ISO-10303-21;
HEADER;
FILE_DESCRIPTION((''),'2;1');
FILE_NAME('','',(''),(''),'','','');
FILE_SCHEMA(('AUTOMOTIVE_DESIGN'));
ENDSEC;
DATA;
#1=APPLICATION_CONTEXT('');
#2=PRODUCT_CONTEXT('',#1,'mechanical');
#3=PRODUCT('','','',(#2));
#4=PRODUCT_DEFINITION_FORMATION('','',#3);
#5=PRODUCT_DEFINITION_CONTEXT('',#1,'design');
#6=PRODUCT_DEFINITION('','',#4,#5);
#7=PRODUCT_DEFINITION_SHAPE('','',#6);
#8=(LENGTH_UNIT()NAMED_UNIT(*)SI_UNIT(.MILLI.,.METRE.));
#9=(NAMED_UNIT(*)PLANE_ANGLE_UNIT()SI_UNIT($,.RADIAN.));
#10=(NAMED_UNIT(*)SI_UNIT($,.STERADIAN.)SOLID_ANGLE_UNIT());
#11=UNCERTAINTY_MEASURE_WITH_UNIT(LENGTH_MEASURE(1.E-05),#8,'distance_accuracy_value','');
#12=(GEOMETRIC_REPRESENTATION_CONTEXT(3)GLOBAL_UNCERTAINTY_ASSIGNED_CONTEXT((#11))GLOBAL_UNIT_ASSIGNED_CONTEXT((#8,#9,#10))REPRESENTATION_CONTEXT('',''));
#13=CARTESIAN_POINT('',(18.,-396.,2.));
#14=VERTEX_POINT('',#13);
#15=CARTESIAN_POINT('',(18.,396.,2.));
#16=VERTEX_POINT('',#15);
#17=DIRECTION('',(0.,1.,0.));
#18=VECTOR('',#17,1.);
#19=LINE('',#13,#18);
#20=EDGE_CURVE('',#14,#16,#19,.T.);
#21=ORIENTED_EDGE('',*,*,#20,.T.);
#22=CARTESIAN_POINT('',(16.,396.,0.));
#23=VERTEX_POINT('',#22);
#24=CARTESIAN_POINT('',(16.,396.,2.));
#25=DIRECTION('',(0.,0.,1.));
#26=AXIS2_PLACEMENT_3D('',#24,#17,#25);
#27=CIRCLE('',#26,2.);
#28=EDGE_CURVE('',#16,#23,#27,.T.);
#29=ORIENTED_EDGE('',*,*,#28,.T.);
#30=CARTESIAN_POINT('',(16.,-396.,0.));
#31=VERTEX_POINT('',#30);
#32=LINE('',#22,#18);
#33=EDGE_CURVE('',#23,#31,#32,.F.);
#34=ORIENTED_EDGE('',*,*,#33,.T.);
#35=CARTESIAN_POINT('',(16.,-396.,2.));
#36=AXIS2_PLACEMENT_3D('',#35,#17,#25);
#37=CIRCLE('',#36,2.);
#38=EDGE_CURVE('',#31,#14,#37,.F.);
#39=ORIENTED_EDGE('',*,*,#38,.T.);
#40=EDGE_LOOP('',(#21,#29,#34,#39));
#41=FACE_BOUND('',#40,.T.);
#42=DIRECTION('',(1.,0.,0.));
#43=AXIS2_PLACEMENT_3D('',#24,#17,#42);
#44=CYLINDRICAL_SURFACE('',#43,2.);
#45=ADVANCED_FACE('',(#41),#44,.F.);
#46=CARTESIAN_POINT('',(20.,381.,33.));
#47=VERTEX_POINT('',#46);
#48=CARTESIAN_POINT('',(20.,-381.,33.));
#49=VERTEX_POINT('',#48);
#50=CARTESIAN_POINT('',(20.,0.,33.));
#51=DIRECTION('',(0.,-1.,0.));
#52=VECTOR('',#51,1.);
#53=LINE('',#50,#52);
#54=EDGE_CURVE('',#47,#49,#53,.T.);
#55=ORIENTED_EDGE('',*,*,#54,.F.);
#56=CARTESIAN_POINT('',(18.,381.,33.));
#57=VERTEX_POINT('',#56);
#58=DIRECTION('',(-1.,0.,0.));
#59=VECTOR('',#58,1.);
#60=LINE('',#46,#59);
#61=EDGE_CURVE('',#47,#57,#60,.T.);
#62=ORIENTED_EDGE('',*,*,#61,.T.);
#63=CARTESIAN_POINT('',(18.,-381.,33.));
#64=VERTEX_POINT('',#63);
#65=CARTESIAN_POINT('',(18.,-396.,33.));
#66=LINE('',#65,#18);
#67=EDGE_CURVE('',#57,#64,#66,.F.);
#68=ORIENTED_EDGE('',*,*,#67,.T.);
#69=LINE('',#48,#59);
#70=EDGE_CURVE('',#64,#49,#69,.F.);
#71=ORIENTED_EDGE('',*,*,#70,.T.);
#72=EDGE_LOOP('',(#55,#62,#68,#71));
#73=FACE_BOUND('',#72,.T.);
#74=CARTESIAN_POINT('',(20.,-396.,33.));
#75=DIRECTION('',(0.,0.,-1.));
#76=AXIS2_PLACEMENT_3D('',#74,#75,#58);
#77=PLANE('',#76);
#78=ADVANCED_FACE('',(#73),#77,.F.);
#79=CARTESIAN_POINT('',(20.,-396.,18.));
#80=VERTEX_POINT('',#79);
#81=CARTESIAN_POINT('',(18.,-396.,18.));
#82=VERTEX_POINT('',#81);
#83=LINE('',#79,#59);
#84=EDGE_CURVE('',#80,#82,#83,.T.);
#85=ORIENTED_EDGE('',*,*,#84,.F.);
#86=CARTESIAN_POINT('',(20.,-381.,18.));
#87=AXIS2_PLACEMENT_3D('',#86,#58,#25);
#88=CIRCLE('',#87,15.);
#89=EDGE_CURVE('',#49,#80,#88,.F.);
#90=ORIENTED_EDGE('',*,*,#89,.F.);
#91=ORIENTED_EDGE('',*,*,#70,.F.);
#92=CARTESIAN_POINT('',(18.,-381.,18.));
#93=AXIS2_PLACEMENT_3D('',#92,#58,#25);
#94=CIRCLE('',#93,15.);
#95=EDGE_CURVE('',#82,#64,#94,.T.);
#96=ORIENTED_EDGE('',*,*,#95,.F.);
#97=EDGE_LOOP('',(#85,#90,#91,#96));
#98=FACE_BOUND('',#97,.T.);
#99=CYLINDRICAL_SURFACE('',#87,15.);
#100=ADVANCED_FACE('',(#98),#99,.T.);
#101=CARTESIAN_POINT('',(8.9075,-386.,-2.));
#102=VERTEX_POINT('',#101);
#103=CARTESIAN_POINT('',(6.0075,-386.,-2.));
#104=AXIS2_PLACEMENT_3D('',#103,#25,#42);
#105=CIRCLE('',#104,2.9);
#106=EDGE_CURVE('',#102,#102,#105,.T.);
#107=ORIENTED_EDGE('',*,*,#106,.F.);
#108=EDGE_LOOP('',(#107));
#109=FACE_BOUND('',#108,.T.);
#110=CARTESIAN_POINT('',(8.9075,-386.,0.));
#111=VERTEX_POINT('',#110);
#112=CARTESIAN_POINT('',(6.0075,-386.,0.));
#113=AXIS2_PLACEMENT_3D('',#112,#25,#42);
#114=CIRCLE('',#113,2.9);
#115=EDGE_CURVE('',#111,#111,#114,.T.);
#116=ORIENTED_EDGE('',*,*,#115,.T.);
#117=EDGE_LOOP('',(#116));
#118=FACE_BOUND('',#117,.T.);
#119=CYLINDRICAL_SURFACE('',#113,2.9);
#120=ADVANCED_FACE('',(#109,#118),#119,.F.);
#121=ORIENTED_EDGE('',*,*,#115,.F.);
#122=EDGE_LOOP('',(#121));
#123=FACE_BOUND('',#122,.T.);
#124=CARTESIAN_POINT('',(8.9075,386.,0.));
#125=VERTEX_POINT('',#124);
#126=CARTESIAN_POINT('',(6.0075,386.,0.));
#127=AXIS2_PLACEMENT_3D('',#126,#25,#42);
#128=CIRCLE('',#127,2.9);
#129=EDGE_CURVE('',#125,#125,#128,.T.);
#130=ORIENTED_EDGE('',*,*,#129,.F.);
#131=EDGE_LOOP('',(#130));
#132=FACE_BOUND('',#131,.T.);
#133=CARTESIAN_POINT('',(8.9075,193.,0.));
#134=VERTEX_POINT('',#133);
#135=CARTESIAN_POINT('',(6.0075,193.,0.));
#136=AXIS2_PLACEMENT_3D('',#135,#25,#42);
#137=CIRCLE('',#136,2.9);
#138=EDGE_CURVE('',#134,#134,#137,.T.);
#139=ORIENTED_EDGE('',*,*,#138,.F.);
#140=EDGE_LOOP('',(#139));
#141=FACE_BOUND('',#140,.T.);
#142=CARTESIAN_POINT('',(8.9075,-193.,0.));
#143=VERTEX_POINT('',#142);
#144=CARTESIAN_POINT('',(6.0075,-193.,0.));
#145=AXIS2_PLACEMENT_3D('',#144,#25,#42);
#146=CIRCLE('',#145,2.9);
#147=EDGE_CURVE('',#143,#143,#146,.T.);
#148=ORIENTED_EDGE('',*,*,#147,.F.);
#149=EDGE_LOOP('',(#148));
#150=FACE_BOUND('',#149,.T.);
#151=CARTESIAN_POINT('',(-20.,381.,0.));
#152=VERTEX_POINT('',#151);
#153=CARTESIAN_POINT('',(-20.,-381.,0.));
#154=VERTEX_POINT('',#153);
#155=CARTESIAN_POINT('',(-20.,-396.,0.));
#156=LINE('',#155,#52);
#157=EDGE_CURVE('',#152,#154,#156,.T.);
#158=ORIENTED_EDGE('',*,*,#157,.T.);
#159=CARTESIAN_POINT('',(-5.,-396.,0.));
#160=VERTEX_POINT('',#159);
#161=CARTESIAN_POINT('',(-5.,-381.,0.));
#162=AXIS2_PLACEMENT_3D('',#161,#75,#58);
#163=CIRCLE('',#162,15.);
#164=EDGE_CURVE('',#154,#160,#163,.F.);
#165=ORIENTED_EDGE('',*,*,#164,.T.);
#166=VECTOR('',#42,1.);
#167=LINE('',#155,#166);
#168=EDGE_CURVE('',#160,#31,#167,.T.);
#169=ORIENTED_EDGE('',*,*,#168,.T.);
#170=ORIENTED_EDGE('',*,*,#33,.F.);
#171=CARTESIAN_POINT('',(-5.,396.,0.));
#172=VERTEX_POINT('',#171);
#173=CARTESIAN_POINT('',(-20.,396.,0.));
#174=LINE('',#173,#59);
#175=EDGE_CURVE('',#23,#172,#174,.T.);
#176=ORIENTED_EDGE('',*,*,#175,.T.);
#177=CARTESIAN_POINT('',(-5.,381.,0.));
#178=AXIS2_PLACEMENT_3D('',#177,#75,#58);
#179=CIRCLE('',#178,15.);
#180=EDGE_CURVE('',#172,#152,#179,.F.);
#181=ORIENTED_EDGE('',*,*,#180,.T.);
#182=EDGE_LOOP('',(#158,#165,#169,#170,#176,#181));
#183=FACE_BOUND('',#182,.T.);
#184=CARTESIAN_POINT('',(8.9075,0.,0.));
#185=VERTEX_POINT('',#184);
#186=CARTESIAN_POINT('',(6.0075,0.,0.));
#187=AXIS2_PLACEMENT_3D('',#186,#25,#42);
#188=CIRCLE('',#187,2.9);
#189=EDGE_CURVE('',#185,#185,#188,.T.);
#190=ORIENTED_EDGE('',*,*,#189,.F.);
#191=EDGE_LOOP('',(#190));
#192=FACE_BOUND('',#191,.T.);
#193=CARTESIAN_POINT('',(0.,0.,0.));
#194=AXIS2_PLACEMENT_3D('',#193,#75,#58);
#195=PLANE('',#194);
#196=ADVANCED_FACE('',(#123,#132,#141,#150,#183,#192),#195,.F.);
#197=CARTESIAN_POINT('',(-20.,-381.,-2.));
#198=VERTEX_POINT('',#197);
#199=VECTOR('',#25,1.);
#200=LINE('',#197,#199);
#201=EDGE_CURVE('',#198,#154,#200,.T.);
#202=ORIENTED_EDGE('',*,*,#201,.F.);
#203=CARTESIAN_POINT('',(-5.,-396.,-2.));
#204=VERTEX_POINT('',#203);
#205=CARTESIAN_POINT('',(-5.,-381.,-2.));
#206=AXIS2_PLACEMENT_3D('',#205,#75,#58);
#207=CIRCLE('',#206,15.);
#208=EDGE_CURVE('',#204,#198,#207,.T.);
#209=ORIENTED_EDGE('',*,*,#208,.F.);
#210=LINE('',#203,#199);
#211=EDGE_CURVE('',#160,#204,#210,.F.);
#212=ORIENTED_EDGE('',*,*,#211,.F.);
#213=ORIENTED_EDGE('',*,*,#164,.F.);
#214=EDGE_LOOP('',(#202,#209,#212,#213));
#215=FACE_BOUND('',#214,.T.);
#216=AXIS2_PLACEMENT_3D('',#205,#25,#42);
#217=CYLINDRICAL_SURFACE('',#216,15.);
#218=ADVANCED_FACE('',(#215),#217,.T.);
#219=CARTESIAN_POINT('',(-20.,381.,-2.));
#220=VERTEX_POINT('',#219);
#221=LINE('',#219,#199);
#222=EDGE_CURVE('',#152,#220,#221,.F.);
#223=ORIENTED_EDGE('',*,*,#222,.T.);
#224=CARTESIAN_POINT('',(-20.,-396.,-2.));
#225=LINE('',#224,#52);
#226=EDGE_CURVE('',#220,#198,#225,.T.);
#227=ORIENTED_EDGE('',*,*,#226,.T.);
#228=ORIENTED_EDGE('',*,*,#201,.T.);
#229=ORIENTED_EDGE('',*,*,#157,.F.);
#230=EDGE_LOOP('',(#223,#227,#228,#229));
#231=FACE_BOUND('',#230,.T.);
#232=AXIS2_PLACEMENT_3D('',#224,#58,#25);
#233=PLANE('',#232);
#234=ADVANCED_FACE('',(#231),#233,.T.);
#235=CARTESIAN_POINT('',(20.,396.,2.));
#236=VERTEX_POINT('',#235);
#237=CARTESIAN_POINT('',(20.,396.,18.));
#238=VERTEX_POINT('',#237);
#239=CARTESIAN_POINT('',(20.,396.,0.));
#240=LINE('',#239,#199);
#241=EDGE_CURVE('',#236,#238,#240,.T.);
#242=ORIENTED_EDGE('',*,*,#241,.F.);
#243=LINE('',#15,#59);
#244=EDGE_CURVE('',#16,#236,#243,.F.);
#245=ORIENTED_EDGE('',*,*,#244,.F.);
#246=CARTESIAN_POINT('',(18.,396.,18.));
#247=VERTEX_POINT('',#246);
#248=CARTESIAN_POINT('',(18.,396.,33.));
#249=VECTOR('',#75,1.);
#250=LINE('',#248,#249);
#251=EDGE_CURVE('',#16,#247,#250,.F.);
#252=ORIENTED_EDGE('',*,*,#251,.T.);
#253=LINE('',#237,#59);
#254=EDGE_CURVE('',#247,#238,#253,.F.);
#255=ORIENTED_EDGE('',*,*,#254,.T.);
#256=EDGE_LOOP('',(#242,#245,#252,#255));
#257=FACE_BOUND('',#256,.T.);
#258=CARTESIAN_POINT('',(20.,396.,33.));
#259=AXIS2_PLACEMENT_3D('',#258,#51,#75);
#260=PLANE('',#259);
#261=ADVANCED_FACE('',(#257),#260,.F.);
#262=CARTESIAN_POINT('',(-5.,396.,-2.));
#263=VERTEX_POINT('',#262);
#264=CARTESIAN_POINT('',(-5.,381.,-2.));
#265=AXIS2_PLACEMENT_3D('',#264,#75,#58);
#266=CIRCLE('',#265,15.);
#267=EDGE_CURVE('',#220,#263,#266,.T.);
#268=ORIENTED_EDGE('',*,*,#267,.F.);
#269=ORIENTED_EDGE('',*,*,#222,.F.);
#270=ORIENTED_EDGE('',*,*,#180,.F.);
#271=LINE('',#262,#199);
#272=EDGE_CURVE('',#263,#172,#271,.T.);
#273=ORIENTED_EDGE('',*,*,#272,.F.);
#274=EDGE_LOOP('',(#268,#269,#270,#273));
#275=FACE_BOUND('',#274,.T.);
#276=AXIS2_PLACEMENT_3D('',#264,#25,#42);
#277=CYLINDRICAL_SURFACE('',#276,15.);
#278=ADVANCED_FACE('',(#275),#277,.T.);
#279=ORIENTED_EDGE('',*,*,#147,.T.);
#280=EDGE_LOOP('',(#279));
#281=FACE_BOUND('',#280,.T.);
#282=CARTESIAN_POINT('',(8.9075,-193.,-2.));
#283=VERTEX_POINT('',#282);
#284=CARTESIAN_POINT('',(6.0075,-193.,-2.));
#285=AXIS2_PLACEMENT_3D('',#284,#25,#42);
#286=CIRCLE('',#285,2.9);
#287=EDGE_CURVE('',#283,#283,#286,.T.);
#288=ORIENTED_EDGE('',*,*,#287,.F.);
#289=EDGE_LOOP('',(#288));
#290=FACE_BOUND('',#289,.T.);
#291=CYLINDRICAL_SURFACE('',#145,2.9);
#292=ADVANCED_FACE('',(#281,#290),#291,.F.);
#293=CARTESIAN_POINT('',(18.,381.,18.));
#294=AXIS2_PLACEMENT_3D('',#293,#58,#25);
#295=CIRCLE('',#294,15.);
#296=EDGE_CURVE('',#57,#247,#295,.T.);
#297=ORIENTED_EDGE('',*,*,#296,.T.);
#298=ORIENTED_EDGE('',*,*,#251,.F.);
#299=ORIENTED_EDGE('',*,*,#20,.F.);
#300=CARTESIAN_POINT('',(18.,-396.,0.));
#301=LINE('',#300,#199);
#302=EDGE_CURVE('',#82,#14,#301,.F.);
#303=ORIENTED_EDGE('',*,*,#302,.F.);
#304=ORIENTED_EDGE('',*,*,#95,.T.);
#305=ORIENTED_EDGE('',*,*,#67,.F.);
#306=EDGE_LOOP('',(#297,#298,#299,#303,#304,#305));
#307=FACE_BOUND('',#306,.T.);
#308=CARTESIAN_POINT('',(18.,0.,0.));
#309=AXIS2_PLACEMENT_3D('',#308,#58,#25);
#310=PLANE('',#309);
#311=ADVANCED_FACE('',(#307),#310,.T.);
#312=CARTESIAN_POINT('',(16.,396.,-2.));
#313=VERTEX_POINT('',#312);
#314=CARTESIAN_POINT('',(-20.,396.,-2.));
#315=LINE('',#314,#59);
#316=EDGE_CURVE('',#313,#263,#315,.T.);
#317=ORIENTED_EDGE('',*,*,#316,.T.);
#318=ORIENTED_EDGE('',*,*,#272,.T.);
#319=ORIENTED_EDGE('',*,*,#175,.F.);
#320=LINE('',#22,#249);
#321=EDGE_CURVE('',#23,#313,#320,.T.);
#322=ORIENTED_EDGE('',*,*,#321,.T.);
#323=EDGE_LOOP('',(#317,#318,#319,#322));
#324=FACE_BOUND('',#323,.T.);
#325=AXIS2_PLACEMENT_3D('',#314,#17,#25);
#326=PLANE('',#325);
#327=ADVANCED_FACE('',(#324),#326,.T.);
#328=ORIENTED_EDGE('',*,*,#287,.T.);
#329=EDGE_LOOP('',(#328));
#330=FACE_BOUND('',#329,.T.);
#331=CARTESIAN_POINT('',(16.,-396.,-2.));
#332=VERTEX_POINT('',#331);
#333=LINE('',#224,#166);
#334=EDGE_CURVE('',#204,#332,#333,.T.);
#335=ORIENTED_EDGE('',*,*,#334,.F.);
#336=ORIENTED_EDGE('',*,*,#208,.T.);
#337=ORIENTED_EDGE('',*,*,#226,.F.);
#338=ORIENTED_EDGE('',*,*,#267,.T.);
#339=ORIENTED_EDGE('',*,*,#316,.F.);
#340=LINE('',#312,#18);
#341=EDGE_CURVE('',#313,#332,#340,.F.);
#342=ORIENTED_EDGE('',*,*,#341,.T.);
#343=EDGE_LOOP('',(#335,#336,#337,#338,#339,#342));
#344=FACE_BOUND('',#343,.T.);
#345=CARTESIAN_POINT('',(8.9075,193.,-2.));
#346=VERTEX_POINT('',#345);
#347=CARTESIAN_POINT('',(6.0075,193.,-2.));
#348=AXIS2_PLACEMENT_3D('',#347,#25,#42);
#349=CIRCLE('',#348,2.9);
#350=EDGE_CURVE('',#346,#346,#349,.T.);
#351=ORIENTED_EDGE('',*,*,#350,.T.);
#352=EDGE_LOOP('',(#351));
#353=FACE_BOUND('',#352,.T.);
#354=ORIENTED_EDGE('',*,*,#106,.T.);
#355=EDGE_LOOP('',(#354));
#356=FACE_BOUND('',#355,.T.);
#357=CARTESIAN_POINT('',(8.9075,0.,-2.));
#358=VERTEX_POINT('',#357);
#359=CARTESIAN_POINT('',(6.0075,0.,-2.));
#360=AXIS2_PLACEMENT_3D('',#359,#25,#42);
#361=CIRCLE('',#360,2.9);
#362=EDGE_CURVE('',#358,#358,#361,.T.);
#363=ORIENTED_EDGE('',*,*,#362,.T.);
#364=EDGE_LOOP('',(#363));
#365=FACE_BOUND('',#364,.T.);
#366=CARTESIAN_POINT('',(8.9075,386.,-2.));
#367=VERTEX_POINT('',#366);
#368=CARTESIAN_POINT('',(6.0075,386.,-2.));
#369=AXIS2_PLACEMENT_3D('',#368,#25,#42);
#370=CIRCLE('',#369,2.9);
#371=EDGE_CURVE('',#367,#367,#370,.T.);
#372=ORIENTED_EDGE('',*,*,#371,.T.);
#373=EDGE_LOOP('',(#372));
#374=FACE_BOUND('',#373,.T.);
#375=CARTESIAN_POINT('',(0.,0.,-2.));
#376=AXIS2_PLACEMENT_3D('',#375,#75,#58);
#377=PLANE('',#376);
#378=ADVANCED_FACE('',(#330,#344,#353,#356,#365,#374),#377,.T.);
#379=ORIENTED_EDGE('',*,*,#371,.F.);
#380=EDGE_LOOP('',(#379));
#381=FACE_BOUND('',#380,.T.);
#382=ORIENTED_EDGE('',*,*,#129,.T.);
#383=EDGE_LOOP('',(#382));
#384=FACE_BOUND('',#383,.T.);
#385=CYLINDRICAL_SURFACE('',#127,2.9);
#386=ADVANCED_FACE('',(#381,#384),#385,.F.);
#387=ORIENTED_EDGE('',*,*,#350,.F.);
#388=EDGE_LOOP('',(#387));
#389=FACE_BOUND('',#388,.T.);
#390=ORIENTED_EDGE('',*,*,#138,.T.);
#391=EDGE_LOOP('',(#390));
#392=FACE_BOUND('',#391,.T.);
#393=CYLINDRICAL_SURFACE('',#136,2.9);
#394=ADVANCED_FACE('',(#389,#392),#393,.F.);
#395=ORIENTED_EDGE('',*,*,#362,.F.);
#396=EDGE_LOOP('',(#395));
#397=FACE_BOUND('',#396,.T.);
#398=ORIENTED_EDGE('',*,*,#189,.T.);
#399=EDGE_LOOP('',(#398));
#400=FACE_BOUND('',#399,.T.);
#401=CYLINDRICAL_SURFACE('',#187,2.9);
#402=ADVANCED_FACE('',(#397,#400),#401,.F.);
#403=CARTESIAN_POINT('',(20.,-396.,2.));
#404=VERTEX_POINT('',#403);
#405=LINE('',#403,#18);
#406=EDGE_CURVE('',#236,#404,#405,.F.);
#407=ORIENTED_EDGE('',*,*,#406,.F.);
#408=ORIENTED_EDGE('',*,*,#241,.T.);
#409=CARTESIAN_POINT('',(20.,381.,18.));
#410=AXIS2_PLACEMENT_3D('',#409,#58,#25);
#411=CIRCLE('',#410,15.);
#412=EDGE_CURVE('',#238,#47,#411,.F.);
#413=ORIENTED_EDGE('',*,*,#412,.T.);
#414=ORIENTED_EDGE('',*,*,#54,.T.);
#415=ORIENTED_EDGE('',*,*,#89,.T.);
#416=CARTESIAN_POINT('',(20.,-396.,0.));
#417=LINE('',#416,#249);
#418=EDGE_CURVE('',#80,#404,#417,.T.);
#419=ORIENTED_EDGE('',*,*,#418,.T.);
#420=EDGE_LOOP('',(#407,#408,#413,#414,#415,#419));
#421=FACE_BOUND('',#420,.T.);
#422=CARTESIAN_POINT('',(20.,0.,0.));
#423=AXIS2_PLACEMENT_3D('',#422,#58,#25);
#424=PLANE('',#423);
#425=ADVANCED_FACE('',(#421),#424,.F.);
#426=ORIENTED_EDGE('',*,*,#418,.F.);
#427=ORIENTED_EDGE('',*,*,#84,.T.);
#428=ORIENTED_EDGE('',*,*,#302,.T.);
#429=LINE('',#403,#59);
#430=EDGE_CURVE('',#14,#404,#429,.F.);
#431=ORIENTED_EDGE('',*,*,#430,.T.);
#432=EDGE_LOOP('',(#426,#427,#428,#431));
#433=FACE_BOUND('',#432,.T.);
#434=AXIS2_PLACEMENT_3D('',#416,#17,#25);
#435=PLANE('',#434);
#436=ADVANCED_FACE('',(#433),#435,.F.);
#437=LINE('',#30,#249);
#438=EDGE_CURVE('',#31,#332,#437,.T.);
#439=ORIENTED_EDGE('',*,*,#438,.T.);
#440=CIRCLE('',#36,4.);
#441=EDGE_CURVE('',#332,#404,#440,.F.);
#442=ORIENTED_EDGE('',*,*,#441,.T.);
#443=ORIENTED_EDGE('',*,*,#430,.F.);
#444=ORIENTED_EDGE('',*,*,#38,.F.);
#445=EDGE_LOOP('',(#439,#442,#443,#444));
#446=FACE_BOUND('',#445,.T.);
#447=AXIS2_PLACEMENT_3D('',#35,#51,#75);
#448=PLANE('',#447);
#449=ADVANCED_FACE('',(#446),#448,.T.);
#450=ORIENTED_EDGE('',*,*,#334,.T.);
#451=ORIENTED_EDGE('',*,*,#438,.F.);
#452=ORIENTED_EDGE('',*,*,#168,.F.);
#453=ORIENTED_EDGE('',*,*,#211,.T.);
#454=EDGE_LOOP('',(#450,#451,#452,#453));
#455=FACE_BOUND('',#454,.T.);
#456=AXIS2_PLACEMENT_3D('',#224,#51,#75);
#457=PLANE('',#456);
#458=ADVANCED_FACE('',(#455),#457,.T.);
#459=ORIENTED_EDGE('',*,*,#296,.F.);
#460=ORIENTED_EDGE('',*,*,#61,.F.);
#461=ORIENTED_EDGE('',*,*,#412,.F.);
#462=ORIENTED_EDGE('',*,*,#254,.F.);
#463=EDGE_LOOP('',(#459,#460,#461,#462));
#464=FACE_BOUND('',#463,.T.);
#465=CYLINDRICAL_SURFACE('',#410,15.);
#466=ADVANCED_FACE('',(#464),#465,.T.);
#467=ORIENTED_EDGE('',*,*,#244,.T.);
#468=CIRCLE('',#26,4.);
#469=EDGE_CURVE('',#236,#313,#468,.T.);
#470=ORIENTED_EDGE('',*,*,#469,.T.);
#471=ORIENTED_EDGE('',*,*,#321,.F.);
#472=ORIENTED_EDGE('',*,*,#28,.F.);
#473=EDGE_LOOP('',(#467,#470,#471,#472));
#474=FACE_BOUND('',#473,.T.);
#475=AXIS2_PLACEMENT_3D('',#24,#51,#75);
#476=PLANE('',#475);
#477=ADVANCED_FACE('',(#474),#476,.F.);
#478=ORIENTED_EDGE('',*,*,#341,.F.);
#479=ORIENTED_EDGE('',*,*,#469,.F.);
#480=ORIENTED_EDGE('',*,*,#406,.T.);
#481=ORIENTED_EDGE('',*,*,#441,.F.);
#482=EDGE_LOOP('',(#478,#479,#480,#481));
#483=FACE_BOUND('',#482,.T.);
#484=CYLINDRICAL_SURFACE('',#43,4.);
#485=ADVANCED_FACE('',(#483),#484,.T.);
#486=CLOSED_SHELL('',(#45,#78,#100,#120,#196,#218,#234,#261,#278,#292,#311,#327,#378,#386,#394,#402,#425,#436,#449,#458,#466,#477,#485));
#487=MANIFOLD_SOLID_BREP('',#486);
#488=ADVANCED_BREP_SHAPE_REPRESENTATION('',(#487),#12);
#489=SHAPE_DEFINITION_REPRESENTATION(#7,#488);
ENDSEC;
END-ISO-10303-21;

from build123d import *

# Parameters (mm, degrees)
SKETCH2_W                    = 40
SKETCH2_H                    = 792
BASE_FLANGE1_DEPTH           = 2
EDGE_FLANGE1_STRIP_W         = 12
EDGE_FLANGE1_STRIP_H         = 2
EDGE_FLANGE1_STRIP_CUT_DEPTH = 792
EDGE_FLANGE1_DEPTH           = 792
M5_CLEARANCE_HOLE1_D         = 5.8
LPATTERN1_COUNT              = 5
LPATTERN1_PITCH              = 193
FILLET1_R                    = 15


# Sheet-metal steps are written as plain solids
with BuildPart() as part:
    # Sketch2 → Base-Flange1 (new body)
    with BuildSketch(Plane.XY):
        Rectangle(SKETCH2_W, SKETCH2_H)
    extrude(amount=-BASE_FLANGE1_DEPTH)

    # Edge-Flange1 strip (across the edge) → Edge-Flange1 strip cut (cut)
    with BuildSketch(Plane(origin=(20, -396, 0), x_dir=(-1, 0, 0), z_dir=(0, 1, 0))):
        with Locations((-2, -1)):
            Rectangle(EDGE_FLANGE1_STRIP_W, EDGE_FLANGE1_STRIP_H)
    extrude(amount=EDGE_FLANGE1_STRIP_CUT_DEPTH, mode=Mode.SUBTRACT)

    # Edge-Flange1 section (across the edge) → Edge-Flange1 (add)
    with BuildSketch(Plane(origin=(20, -396, 0), x_dir=(-1, 0, 0), z_dir=(0, 1, 0))):
        with BuildLine():
            Line((0, 2), (0, 33))
            Line((0, 33), (2, 33))
            Line((2, 33), (2, 2))
            ThreePointArc((2, 2), (2.585786438, 0.585786438), (4, 0))
            Line((4, 0), (4, -2))
            ThreePointArc((4, -2), (1.171572875, -0.828427125), (0, 2))
        make_face()
    extrude(amount=EDGE_FLANGE1_DEPTH)

    # M5 Clearance Hole1 (through all)
    with Locations(Plane.XY):
        with Locations((6.0075, -386)):
            m5_clearance_hole1 = Hole(M5_CLEARANCE_HOLE1_D / 2)

    # LPattern1: M5 Clearance Hole1 ×5
    with Locations(*[(0, i * LPATTERN1_PITCH, 0) for i in range(1, LPATTERN1_COUNT)]):
        add(m5_clearance_hole1, mode=Mode.SUBTRACT)

    # Fillet1
    fillet1_edges = [part.edges().sort_by_distance(p)[0] for p in [
        (19, -396, 33),
        (19, 396, 33),
        (-20, -396, -1),
        (-20, 396, -1),
    ]]
    fillet(fillet1_edges, radius=FILLET1_R)


solid = part.part
